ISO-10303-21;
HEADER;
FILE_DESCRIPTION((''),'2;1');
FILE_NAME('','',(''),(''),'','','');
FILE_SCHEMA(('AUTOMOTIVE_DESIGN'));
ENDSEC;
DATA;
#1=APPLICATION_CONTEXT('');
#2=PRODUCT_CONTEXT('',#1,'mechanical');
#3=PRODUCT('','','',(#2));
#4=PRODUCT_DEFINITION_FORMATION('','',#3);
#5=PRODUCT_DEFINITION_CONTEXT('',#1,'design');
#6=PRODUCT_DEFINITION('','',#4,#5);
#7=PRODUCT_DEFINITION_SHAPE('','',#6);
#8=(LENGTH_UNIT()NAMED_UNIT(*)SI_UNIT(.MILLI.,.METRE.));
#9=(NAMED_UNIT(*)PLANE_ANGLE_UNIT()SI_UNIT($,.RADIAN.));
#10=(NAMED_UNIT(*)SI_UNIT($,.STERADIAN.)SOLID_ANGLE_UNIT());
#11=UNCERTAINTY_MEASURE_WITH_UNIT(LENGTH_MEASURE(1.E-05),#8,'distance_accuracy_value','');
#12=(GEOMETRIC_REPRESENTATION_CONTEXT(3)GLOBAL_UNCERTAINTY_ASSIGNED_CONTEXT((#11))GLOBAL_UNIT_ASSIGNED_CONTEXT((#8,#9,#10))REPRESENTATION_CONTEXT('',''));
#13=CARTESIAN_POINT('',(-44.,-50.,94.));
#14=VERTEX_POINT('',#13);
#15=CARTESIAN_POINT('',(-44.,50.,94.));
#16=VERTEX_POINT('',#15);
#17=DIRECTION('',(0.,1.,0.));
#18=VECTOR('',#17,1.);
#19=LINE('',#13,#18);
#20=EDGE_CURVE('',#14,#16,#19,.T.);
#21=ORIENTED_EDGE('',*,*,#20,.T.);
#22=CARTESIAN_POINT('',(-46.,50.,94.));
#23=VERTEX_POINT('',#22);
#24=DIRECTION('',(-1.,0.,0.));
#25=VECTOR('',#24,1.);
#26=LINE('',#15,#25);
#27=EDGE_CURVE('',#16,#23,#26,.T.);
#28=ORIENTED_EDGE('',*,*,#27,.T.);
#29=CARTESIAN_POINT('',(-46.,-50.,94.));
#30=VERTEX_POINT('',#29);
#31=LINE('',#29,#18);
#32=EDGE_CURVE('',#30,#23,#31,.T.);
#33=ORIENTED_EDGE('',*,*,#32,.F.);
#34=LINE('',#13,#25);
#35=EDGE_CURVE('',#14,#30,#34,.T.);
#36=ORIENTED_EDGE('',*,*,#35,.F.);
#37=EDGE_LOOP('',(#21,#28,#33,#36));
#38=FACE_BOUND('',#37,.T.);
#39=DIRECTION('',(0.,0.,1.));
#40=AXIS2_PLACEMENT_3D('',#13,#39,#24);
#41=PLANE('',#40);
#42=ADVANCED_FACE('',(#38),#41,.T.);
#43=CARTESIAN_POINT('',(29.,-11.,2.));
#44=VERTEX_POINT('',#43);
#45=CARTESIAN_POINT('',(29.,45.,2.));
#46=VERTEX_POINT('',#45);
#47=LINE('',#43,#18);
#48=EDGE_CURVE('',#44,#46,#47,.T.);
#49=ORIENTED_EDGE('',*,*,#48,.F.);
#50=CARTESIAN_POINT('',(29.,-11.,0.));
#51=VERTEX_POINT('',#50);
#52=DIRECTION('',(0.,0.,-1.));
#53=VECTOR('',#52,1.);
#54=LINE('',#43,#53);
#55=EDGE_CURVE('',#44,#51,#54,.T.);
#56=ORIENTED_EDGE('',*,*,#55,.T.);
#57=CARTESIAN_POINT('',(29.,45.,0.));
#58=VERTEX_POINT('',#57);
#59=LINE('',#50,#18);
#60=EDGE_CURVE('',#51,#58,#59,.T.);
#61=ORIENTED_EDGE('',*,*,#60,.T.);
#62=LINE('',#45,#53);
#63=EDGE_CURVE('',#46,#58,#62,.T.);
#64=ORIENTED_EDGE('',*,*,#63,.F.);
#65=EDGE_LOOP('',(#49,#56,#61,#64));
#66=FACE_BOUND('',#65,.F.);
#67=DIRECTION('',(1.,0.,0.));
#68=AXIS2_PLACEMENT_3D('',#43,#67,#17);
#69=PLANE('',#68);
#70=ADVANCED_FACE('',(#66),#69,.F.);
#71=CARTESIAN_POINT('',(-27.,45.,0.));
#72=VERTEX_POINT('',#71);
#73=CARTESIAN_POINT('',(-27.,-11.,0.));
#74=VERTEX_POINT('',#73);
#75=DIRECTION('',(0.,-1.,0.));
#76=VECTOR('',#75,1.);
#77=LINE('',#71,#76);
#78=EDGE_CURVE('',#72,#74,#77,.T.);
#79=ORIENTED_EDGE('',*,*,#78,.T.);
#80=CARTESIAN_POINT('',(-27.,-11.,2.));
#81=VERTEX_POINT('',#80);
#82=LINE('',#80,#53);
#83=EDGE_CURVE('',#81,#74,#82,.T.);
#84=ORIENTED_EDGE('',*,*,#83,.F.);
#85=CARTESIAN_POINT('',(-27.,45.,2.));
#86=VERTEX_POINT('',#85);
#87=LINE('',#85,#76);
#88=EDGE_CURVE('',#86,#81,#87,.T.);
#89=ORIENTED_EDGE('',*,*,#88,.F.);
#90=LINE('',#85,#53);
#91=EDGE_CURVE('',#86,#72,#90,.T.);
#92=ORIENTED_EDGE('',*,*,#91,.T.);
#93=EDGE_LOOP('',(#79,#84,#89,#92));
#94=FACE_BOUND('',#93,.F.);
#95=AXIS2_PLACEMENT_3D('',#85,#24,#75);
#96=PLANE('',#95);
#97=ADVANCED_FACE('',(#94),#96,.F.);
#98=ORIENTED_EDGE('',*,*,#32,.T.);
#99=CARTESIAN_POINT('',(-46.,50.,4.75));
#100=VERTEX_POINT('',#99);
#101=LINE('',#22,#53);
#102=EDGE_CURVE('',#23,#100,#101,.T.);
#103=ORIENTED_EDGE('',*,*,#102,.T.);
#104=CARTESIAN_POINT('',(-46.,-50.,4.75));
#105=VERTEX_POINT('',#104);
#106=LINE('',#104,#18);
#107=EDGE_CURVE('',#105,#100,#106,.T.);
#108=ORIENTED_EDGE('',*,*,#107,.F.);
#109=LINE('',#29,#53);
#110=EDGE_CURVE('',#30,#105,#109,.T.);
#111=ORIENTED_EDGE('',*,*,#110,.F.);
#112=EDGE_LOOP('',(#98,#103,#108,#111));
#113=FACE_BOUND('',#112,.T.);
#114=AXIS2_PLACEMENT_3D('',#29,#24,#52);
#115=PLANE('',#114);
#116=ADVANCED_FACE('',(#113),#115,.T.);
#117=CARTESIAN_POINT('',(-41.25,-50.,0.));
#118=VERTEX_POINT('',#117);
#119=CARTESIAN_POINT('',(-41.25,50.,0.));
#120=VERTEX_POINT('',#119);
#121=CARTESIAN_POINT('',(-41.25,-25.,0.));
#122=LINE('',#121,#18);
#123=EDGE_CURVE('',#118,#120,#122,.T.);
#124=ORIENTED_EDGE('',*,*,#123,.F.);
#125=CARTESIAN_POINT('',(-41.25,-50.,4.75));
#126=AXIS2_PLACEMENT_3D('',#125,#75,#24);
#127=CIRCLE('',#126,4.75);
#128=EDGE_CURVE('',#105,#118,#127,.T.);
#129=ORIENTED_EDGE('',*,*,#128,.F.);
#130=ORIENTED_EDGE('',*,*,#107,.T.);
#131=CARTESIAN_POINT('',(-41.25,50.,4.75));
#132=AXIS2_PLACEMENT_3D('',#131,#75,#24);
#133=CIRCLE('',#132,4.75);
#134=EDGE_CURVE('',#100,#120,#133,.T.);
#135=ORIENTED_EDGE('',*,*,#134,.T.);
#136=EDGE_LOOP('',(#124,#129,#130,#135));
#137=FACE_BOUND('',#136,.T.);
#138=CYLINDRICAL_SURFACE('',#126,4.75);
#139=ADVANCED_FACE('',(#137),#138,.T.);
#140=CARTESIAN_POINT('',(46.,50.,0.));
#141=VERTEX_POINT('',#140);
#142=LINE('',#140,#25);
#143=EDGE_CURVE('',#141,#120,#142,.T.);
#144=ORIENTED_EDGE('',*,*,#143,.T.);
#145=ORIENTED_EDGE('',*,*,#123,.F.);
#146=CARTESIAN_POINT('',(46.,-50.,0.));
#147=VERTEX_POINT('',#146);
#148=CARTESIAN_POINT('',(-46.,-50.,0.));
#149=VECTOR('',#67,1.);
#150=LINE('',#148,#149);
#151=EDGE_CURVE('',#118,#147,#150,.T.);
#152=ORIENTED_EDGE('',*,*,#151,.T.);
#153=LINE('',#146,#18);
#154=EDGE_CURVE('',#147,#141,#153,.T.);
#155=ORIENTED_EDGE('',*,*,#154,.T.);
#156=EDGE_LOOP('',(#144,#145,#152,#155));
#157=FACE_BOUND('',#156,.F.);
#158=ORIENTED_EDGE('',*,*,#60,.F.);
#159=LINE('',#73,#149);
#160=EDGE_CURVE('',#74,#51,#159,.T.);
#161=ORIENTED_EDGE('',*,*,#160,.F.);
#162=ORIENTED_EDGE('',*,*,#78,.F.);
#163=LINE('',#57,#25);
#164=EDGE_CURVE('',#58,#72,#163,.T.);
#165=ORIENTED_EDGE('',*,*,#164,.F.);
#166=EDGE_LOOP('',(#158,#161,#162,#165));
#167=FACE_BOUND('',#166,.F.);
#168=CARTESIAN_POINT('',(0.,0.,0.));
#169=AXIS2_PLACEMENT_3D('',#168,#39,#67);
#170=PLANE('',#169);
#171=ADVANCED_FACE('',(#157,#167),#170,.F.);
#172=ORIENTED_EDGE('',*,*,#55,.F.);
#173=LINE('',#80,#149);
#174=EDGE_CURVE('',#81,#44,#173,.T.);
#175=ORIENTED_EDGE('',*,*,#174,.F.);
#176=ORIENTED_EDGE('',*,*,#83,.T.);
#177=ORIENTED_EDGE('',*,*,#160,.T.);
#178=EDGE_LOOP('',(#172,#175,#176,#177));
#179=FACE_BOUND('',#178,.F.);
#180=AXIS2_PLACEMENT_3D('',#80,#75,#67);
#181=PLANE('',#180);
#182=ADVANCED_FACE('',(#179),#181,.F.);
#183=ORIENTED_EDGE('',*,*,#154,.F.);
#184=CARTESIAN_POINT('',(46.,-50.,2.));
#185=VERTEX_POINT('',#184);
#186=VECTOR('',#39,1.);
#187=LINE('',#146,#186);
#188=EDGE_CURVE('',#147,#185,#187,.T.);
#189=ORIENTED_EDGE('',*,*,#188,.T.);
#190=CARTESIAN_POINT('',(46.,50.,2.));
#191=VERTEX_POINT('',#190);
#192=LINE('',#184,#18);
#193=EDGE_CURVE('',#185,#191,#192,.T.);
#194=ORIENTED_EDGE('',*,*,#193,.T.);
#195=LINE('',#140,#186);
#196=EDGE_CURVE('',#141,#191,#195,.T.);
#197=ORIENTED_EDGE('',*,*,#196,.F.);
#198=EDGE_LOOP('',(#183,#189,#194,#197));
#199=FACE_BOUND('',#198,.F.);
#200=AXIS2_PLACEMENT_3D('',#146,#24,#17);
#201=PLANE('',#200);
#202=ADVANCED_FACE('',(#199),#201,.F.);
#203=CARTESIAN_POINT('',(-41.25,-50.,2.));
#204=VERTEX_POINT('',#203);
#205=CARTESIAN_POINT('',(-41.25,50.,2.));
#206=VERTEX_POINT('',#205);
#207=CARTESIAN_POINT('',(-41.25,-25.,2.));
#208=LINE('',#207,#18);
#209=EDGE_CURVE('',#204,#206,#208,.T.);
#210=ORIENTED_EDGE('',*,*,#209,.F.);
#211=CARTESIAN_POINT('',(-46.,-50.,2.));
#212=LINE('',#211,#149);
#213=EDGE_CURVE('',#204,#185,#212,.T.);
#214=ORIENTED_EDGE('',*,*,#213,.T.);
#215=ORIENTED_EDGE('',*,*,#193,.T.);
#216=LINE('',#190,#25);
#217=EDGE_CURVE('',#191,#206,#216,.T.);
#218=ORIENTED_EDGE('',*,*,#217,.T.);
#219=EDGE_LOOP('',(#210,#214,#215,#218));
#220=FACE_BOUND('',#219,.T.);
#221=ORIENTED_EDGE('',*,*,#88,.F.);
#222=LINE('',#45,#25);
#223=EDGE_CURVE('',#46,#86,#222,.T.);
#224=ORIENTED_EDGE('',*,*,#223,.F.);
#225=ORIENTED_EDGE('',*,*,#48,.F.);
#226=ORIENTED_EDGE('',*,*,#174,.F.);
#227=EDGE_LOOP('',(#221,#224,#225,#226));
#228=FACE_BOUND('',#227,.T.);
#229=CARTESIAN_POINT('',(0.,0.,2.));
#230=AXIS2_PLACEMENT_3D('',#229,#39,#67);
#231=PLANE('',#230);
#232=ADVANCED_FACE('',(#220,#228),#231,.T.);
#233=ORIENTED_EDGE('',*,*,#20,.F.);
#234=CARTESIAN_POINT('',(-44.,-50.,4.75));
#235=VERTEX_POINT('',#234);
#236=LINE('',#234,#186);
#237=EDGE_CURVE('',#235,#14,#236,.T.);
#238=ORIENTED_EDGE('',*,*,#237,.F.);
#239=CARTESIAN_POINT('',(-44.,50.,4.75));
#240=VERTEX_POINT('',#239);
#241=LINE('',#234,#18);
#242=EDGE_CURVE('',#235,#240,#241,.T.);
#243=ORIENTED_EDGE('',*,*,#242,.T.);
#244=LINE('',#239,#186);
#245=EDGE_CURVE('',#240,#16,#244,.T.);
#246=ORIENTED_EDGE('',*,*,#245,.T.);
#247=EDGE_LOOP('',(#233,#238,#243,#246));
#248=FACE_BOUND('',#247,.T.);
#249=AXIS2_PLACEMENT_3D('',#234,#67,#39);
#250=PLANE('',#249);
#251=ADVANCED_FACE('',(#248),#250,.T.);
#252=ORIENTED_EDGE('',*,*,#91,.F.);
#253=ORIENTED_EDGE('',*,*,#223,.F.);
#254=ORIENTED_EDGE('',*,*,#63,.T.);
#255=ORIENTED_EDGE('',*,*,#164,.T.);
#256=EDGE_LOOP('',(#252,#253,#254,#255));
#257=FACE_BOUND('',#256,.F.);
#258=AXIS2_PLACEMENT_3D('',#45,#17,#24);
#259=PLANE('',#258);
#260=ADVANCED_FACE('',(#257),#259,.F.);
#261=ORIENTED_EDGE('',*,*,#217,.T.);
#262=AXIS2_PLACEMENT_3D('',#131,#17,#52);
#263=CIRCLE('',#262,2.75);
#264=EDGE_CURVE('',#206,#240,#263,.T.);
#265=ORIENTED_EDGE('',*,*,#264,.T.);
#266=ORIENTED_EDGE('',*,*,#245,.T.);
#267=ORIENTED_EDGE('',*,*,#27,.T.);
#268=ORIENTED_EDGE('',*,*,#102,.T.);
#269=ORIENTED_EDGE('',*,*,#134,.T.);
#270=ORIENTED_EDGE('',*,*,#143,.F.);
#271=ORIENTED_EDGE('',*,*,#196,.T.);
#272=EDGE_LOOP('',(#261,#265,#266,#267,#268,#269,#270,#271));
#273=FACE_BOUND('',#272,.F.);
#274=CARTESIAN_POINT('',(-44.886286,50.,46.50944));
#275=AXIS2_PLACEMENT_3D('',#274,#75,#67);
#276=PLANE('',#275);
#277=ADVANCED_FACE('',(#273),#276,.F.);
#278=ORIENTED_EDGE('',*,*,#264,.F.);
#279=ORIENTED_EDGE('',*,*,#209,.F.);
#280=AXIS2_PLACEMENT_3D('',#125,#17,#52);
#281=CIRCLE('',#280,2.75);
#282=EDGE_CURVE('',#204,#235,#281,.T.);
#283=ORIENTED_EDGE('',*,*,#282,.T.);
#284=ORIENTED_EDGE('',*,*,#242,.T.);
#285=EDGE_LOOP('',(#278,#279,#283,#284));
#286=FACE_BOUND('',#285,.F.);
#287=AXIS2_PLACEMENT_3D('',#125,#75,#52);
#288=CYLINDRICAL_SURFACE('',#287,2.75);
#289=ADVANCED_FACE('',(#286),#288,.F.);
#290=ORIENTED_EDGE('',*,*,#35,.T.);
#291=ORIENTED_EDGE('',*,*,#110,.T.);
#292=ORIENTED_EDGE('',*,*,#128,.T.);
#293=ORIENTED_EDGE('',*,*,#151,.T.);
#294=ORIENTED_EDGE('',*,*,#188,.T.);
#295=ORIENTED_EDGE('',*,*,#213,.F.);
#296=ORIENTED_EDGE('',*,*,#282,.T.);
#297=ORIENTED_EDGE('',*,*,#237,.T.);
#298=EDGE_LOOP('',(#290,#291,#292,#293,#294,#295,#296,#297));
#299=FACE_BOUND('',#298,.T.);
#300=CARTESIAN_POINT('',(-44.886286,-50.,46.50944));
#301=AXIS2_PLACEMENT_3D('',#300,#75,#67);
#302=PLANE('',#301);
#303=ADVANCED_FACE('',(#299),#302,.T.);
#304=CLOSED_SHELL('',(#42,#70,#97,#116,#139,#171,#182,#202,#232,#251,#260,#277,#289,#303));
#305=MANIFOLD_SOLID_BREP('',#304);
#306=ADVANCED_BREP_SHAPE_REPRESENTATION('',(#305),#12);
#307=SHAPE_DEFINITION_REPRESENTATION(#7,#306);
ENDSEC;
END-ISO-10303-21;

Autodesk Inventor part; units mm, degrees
ref_plane "YZ Plane" through (0, 0, 0) normal (1, 0, 0) x (0, 1, 0)
ref_plane "XZ Plane" through (0, 0, 0) normal (0, 1, 0) x (-1, 0, 0)
ref_plane "XY Plane" through (0, 0, 0) normal (0, 0, 1) x (1, 0, 0)
sketch "Sketch1" plane through (0, 0, 0) normal (0, 0, 1) x (1, 0, 0)
  line L0 (-46, -50) -> (46, -50)
  line L1 (46, -50) -> (46, 50)
  line L2 (46, 50) -> (-46, 50)
  line L3 (-46, 50) -> (-46, -50)
  line L4 (-46, -50) -> (46, 50) construction
  line L5 (46, -50) -> (-46, 50) construction
  point P0 (0, 0)
  dimension "d154" = 92
  dimension "d155" = 100
extrude "Plate5" add sketch "Sketch1" along normal blind 2
sketch "Sketch7" plane through (-44, -50, 0) normal (-1, 0, 0) x (0, -1, 0)
  line L0 (-100, 0) -> (0, 0)
  line L1 (0, 0) -> (0, 94)
  line L2 (0, 94) -> (-100, 94)
  line L3 (-100, 94) -> (-100, 0)
edge flange "Flange3" height 94 angle 90 thickness 2 bend radius 2.75 thickness toward (-1, 0, 0) relief round relief width 2 relief depth 1 edges at (-46, 0, 2) wall of the first edge with corners at (-44, 50, 0) (-44, -50, 0) (-44, -50, 94) (-44, 50, 94)
bend "Bend3"
corner "Corner3"
sketch "Sketch8" plane through (0, 0, 2) normal (0, 0, 1) x (1, 0, 0)
  line L0 (46, 50) -> (46, -50) projected
  line L1 (-41.25, 50) -> (46, 50) projected
  line L2 (29, 45) -> (-27, 45)
  line L3 (-27, 45) -> (-27, -11)
  line L4 (-27, -11) -> (29, -11)
  line L5 (29, -11) -> (29, 45)
  line L6 (29, 45) -> (-27, -11) construction
  line L7 (-27, 45) -> (29, -11) construction
  point P0 (0, 0)
  point P1 (1, 17)
  point P2 (2.375, 50)
  dimension "d167" = 56
  dimension "d168" = 56
  dimension "d169" = 5
  dimension "d172" = 17
extrude "Cut1" cut sketch "Sketch8" against normal blind 2
properties part number "TZS 752 FDS 1200 FLANGE 2" material "Stainless Steel"
